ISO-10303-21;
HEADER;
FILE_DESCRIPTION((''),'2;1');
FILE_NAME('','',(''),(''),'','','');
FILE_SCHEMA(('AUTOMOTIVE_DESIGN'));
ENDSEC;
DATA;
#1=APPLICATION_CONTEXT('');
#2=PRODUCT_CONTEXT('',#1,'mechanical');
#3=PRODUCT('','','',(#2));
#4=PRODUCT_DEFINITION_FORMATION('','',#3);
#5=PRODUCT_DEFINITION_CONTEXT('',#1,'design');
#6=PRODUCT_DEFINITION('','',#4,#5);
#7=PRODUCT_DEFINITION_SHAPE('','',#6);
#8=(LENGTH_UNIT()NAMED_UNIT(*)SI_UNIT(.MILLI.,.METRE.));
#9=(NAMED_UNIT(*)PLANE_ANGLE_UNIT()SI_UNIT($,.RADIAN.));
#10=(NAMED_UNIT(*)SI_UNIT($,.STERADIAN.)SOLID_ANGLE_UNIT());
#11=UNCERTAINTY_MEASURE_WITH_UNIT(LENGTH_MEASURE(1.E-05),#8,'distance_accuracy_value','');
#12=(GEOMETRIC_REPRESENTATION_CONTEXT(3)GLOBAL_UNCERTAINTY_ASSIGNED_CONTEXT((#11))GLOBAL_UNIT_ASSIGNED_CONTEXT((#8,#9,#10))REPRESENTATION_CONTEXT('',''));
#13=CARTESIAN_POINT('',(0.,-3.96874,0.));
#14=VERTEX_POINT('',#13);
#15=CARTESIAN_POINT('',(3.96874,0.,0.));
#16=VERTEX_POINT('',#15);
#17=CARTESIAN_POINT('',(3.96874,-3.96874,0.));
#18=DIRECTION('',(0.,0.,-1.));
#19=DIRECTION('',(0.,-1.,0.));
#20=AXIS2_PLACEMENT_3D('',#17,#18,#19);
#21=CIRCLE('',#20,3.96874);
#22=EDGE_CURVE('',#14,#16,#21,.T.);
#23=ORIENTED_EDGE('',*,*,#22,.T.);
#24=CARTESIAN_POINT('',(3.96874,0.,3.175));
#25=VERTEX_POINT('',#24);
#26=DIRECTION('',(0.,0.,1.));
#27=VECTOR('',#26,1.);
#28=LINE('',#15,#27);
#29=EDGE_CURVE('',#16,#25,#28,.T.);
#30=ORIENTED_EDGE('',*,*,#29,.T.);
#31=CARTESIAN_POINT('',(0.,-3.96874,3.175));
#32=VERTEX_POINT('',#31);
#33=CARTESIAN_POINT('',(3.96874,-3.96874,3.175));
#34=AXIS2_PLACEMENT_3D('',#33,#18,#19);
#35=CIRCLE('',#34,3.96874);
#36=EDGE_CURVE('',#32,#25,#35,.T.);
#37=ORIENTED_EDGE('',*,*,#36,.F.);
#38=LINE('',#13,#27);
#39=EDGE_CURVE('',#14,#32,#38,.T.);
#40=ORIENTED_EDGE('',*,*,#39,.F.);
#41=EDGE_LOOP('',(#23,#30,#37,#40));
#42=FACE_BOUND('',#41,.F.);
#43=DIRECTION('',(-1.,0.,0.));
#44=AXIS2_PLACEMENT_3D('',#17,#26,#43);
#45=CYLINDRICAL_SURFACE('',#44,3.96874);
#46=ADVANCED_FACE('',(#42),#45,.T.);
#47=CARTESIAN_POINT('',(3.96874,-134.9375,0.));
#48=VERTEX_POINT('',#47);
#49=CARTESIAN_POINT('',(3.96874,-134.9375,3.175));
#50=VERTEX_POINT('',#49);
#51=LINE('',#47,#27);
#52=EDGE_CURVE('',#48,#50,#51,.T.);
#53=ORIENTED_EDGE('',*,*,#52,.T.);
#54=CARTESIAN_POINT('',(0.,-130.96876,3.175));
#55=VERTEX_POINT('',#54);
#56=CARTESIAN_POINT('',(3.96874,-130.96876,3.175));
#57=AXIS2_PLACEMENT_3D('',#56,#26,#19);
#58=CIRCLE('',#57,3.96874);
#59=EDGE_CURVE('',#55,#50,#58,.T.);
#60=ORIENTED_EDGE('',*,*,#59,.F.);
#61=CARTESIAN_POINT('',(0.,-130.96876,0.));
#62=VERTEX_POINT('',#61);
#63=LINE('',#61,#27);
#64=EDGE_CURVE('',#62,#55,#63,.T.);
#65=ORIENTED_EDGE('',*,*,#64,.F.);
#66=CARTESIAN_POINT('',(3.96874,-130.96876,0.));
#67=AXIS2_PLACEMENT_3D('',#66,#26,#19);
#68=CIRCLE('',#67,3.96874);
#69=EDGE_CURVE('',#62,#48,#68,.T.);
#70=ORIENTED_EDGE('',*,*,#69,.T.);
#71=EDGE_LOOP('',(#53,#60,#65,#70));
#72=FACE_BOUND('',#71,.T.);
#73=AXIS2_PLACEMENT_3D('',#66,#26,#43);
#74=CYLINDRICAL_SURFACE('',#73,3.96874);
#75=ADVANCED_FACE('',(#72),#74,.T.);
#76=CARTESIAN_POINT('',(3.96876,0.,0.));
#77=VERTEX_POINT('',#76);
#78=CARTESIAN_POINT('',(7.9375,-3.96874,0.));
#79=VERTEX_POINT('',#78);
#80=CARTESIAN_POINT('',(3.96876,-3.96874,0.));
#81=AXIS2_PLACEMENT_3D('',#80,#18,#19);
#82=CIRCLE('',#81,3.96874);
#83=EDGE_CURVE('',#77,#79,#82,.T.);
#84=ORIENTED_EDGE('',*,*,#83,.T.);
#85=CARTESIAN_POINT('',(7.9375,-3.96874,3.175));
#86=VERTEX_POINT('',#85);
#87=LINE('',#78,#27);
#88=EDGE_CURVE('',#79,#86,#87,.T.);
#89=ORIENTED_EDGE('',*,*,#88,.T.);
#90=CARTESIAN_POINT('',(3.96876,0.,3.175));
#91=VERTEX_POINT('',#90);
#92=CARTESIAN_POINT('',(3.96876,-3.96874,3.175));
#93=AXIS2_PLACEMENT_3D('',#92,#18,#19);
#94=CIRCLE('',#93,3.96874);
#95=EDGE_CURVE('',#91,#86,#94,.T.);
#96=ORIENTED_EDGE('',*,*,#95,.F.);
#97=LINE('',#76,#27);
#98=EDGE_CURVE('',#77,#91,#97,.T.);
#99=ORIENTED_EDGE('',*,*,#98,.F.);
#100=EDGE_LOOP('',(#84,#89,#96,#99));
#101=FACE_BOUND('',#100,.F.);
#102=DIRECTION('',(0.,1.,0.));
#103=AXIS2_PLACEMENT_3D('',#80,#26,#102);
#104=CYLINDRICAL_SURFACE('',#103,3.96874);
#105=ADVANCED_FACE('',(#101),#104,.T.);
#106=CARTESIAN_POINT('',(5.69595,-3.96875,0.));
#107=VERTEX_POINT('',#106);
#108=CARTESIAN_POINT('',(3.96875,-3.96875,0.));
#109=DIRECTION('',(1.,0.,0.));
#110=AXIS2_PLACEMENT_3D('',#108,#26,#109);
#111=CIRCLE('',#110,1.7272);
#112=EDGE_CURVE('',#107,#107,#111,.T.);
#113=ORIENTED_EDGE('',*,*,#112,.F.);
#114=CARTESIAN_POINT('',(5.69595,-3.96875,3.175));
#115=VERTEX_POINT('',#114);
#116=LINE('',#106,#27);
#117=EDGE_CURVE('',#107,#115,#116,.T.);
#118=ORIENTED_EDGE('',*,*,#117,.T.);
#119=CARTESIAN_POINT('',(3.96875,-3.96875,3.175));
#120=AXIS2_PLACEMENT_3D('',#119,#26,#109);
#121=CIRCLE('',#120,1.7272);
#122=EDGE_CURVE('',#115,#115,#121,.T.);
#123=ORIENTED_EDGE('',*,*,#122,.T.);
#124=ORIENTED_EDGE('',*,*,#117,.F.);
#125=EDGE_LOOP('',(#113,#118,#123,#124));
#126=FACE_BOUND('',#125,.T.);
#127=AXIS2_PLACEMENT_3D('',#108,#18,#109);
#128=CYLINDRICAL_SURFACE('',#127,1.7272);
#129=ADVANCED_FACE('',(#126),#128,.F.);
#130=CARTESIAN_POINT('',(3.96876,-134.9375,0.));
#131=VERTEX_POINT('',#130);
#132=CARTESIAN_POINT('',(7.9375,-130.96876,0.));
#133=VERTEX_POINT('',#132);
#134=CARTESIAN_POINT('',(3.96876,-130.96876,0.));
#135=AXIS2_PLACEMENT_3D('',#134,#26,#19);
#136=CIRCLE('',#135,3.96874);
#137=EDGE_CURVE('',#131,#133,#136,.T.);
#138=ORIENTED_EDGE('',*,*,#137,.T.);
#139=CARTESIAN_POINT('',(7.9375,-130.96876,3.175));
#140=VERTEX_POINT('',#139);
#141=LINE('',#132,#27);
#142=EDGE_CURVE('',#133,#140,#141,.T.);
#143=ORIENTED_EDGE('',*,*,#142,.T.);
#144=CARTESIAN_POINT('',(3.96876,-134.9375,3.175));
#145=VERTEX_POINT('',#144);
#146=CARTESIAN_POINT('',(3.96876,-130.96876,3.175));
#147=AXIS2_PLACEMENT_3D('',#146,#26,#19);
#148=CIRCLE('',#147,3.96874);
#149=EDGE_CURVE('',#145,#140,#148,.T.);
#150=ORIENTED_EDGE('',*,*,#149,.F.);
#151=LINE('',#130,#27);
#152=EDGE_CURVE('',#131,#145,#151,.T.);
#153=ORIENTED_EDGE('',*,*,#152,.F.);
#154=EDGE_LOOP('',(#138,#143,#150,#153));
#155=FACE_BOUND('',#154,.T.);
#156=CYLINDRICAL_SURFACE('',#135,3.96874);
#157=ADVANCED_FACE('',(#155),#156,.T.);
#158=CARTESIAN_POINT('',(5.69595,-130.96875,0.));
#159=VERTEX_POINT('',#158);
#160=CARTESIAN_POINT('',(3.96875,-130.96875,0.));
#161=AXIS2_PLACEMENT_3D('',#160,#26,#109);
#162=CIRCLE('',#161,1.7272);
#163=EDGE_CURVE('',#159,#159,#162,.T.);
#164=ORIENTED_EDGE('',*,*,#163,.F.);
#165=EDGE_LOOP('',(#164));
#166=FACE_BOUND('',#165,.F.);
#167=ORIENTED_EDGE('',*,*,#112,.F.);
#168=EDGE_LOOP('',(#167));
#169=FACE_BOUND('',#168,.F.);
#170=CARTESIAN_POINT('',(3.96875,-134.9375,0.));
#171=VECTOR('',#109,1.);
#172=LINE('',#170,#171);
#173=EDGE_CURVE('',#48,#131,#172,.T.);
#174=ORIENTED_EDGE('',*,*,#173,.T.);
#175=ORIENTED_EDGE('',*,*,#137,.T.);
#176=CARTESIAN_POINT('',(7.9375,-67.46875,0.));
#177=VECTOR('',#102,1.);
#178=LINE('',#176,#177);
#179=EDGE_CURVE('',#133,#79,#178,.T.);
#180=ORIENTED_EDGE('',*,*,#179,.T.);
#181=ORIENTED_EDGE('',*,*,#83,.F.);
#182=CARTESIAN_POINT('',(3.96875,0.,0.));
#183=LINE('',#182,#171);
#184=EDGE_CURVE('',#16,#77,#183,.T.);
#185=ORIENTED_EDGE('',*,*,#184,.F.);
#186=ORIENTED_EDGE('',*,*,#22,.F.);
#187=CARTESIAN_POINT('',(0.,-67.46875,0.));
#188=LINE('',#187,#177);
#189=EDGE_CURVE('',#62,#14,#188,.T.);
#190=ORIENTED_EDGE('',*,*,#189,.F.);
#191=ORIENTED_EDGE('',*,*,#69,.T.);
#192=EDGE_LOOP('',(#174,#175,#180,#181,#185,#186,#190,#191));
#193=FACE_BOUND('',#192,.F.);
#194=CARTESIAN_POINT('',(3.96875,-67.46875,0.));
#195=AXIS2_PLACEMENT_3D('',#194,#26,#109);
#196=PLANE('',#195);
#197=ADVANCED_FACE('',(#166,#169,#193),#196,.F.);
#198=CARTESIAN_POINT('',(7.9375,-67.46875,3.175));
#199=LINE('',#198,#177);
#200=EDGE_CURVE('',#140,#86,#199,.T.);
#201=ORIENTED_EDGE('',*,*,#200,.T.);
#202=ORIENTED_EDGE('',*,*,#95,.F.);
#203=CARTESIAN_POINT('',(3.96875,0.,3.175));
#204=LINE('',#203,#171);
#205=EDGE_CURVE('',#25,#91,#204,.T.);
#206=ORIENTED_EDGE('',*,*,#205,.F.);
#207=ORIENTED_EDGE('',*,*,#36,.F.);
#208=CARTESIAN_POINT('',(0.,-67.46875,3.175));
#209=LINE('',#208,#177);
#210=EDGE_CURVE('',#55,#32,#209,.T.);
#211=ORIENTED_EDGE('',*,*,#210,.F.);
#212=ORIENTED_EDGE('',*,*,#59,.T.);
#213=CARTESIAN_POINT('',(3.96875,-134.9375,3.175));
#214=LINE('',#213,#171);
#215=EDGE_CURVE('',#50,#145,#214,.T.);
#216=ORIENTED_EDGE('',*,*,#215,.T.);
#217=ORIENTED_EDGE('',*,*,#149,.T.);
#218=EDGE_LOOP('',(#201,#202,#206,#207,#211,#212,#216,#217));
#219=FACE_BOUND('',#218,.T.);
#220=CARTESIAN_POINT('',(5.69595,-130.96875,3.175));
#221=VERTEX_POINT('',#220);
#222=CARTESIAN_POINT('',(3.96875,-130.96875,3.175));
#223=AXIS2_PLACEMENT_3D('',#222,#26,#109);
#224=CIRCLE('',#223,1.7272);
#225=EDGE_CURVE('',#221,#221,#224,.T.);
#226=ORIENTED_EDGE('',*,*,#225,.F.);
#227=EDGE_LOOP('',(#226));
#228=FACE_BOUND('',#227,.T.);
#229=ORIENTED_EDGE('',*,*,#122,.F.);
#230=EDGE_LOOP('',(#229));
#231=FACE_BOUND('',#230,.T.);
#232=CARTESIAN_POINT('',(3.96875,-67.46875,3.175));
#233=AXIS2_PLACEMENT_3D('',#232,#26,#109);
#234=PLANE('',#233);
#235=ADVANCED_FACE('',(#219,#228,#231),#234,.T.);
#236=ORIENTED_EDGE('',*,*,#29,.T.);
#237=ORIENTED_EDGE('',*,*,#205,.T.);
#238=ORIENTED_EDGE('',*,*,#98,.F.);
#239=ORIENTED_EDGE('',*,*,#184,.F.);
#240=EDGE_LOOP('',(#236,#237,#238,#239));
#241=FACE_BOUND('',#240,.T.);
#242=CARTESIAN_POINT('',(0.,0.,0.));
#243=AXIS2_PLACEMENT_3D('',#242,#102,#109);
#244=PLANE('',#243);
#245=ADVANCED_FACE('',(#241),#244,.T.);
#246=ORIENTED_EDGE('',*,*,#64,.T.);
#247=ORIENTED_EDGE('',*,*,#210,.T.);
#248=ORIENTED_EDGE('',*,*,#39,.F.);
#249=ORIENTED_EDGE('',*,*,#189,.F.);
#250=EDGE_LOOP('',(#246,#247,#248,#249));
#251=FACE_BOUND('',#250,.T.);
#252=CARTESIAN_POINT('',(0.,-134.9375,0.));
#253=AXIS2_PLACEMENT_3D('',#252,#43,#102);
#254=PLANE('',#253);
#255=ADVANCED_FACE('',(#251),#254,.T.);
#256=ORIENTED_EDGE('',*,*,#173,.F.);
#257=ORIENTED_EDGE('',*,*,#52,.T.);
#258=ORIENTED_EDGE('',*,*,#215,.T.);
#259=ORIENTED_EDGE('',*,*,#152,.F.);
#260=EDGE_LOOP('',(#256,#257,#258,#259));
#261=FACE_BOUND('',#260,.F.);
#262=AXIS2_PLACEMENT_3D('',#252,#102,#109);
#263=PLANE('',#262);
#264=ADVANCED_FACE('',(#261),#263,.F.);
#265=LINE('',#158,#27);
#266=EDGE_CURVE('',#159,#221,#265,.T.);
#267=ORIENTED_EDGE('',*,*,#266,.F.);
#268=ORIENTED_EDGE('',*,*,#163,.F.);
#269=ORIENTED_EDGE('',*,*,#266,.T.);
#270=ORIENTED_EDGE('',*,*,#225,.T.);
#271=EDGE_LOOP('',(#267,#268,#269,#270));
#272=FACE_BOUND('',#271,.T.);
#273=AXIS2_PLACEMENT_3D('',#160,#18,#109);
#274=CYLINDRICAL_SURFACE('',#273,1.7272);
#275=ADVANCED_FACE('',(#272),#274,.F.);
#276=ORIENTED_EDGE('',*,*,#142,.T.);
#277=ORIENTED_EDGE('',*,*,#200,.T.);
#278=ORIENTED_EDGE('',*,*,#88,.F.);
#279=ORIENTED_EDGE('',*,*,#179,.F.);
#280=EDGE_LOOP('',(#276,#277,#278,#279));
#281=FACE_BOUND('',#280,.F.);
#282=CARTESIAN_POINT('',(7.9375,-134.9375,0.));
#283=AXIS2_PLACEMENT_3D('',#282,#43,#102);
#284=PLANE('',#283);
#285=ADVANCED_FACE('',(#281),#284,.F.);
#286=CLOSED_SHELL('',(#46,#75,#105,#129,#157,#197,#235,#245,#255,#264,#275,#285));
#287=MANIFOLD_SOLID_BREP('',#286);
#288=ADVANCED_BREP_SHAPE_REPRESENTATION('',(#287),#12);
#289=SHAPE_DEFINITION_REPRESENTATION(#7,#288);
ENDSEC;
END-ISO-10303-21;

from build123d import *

# Parameters (mm, degrees)
F0_W     = 7.9375
F0_H     = 134.9375
F0_R     = 1.7272
F1_DEPTH = 3.175
F2_R     = 3.96874


# Not quite as in the source:
# - a fillet or chamfer is up to 0.001 mm smaller than in the source, because OpenCascade refuses the exact size


with BuildPart() as f1:
    # F0 (on Top) → F1 (new body)
    with BuildSketch(Plane.XY):
        with Locations((3.96875, -67.46875)):
            Rectangle(F0_W, F0_H)
        with Locations((3.96875, -130.96875)):
            Circle(F0_R, mode=Mode.SUBTRACT)
        with Locations((3.96875, -3.96875)):
            Circle(F0_R, mode=Mode.SUBTRACT)
    extrude(amount=F1_DEPTH)

    # F2 (radius 3.96875 in the source; OpenCascade refuses exactly that, so slightly less here)
    f2_edges = [f1.edges().sort_by_distance(p)[0] for p in [
        (7.9375, 0, 1.5875),
        (0, 0, 1.5875),
        (0, -134.9375, 1.5875),
        (7.9375, -134.9375, 1.5875),
    ]]
    fillet(f2_edges, radius=F2_R)


solid = f1.part
